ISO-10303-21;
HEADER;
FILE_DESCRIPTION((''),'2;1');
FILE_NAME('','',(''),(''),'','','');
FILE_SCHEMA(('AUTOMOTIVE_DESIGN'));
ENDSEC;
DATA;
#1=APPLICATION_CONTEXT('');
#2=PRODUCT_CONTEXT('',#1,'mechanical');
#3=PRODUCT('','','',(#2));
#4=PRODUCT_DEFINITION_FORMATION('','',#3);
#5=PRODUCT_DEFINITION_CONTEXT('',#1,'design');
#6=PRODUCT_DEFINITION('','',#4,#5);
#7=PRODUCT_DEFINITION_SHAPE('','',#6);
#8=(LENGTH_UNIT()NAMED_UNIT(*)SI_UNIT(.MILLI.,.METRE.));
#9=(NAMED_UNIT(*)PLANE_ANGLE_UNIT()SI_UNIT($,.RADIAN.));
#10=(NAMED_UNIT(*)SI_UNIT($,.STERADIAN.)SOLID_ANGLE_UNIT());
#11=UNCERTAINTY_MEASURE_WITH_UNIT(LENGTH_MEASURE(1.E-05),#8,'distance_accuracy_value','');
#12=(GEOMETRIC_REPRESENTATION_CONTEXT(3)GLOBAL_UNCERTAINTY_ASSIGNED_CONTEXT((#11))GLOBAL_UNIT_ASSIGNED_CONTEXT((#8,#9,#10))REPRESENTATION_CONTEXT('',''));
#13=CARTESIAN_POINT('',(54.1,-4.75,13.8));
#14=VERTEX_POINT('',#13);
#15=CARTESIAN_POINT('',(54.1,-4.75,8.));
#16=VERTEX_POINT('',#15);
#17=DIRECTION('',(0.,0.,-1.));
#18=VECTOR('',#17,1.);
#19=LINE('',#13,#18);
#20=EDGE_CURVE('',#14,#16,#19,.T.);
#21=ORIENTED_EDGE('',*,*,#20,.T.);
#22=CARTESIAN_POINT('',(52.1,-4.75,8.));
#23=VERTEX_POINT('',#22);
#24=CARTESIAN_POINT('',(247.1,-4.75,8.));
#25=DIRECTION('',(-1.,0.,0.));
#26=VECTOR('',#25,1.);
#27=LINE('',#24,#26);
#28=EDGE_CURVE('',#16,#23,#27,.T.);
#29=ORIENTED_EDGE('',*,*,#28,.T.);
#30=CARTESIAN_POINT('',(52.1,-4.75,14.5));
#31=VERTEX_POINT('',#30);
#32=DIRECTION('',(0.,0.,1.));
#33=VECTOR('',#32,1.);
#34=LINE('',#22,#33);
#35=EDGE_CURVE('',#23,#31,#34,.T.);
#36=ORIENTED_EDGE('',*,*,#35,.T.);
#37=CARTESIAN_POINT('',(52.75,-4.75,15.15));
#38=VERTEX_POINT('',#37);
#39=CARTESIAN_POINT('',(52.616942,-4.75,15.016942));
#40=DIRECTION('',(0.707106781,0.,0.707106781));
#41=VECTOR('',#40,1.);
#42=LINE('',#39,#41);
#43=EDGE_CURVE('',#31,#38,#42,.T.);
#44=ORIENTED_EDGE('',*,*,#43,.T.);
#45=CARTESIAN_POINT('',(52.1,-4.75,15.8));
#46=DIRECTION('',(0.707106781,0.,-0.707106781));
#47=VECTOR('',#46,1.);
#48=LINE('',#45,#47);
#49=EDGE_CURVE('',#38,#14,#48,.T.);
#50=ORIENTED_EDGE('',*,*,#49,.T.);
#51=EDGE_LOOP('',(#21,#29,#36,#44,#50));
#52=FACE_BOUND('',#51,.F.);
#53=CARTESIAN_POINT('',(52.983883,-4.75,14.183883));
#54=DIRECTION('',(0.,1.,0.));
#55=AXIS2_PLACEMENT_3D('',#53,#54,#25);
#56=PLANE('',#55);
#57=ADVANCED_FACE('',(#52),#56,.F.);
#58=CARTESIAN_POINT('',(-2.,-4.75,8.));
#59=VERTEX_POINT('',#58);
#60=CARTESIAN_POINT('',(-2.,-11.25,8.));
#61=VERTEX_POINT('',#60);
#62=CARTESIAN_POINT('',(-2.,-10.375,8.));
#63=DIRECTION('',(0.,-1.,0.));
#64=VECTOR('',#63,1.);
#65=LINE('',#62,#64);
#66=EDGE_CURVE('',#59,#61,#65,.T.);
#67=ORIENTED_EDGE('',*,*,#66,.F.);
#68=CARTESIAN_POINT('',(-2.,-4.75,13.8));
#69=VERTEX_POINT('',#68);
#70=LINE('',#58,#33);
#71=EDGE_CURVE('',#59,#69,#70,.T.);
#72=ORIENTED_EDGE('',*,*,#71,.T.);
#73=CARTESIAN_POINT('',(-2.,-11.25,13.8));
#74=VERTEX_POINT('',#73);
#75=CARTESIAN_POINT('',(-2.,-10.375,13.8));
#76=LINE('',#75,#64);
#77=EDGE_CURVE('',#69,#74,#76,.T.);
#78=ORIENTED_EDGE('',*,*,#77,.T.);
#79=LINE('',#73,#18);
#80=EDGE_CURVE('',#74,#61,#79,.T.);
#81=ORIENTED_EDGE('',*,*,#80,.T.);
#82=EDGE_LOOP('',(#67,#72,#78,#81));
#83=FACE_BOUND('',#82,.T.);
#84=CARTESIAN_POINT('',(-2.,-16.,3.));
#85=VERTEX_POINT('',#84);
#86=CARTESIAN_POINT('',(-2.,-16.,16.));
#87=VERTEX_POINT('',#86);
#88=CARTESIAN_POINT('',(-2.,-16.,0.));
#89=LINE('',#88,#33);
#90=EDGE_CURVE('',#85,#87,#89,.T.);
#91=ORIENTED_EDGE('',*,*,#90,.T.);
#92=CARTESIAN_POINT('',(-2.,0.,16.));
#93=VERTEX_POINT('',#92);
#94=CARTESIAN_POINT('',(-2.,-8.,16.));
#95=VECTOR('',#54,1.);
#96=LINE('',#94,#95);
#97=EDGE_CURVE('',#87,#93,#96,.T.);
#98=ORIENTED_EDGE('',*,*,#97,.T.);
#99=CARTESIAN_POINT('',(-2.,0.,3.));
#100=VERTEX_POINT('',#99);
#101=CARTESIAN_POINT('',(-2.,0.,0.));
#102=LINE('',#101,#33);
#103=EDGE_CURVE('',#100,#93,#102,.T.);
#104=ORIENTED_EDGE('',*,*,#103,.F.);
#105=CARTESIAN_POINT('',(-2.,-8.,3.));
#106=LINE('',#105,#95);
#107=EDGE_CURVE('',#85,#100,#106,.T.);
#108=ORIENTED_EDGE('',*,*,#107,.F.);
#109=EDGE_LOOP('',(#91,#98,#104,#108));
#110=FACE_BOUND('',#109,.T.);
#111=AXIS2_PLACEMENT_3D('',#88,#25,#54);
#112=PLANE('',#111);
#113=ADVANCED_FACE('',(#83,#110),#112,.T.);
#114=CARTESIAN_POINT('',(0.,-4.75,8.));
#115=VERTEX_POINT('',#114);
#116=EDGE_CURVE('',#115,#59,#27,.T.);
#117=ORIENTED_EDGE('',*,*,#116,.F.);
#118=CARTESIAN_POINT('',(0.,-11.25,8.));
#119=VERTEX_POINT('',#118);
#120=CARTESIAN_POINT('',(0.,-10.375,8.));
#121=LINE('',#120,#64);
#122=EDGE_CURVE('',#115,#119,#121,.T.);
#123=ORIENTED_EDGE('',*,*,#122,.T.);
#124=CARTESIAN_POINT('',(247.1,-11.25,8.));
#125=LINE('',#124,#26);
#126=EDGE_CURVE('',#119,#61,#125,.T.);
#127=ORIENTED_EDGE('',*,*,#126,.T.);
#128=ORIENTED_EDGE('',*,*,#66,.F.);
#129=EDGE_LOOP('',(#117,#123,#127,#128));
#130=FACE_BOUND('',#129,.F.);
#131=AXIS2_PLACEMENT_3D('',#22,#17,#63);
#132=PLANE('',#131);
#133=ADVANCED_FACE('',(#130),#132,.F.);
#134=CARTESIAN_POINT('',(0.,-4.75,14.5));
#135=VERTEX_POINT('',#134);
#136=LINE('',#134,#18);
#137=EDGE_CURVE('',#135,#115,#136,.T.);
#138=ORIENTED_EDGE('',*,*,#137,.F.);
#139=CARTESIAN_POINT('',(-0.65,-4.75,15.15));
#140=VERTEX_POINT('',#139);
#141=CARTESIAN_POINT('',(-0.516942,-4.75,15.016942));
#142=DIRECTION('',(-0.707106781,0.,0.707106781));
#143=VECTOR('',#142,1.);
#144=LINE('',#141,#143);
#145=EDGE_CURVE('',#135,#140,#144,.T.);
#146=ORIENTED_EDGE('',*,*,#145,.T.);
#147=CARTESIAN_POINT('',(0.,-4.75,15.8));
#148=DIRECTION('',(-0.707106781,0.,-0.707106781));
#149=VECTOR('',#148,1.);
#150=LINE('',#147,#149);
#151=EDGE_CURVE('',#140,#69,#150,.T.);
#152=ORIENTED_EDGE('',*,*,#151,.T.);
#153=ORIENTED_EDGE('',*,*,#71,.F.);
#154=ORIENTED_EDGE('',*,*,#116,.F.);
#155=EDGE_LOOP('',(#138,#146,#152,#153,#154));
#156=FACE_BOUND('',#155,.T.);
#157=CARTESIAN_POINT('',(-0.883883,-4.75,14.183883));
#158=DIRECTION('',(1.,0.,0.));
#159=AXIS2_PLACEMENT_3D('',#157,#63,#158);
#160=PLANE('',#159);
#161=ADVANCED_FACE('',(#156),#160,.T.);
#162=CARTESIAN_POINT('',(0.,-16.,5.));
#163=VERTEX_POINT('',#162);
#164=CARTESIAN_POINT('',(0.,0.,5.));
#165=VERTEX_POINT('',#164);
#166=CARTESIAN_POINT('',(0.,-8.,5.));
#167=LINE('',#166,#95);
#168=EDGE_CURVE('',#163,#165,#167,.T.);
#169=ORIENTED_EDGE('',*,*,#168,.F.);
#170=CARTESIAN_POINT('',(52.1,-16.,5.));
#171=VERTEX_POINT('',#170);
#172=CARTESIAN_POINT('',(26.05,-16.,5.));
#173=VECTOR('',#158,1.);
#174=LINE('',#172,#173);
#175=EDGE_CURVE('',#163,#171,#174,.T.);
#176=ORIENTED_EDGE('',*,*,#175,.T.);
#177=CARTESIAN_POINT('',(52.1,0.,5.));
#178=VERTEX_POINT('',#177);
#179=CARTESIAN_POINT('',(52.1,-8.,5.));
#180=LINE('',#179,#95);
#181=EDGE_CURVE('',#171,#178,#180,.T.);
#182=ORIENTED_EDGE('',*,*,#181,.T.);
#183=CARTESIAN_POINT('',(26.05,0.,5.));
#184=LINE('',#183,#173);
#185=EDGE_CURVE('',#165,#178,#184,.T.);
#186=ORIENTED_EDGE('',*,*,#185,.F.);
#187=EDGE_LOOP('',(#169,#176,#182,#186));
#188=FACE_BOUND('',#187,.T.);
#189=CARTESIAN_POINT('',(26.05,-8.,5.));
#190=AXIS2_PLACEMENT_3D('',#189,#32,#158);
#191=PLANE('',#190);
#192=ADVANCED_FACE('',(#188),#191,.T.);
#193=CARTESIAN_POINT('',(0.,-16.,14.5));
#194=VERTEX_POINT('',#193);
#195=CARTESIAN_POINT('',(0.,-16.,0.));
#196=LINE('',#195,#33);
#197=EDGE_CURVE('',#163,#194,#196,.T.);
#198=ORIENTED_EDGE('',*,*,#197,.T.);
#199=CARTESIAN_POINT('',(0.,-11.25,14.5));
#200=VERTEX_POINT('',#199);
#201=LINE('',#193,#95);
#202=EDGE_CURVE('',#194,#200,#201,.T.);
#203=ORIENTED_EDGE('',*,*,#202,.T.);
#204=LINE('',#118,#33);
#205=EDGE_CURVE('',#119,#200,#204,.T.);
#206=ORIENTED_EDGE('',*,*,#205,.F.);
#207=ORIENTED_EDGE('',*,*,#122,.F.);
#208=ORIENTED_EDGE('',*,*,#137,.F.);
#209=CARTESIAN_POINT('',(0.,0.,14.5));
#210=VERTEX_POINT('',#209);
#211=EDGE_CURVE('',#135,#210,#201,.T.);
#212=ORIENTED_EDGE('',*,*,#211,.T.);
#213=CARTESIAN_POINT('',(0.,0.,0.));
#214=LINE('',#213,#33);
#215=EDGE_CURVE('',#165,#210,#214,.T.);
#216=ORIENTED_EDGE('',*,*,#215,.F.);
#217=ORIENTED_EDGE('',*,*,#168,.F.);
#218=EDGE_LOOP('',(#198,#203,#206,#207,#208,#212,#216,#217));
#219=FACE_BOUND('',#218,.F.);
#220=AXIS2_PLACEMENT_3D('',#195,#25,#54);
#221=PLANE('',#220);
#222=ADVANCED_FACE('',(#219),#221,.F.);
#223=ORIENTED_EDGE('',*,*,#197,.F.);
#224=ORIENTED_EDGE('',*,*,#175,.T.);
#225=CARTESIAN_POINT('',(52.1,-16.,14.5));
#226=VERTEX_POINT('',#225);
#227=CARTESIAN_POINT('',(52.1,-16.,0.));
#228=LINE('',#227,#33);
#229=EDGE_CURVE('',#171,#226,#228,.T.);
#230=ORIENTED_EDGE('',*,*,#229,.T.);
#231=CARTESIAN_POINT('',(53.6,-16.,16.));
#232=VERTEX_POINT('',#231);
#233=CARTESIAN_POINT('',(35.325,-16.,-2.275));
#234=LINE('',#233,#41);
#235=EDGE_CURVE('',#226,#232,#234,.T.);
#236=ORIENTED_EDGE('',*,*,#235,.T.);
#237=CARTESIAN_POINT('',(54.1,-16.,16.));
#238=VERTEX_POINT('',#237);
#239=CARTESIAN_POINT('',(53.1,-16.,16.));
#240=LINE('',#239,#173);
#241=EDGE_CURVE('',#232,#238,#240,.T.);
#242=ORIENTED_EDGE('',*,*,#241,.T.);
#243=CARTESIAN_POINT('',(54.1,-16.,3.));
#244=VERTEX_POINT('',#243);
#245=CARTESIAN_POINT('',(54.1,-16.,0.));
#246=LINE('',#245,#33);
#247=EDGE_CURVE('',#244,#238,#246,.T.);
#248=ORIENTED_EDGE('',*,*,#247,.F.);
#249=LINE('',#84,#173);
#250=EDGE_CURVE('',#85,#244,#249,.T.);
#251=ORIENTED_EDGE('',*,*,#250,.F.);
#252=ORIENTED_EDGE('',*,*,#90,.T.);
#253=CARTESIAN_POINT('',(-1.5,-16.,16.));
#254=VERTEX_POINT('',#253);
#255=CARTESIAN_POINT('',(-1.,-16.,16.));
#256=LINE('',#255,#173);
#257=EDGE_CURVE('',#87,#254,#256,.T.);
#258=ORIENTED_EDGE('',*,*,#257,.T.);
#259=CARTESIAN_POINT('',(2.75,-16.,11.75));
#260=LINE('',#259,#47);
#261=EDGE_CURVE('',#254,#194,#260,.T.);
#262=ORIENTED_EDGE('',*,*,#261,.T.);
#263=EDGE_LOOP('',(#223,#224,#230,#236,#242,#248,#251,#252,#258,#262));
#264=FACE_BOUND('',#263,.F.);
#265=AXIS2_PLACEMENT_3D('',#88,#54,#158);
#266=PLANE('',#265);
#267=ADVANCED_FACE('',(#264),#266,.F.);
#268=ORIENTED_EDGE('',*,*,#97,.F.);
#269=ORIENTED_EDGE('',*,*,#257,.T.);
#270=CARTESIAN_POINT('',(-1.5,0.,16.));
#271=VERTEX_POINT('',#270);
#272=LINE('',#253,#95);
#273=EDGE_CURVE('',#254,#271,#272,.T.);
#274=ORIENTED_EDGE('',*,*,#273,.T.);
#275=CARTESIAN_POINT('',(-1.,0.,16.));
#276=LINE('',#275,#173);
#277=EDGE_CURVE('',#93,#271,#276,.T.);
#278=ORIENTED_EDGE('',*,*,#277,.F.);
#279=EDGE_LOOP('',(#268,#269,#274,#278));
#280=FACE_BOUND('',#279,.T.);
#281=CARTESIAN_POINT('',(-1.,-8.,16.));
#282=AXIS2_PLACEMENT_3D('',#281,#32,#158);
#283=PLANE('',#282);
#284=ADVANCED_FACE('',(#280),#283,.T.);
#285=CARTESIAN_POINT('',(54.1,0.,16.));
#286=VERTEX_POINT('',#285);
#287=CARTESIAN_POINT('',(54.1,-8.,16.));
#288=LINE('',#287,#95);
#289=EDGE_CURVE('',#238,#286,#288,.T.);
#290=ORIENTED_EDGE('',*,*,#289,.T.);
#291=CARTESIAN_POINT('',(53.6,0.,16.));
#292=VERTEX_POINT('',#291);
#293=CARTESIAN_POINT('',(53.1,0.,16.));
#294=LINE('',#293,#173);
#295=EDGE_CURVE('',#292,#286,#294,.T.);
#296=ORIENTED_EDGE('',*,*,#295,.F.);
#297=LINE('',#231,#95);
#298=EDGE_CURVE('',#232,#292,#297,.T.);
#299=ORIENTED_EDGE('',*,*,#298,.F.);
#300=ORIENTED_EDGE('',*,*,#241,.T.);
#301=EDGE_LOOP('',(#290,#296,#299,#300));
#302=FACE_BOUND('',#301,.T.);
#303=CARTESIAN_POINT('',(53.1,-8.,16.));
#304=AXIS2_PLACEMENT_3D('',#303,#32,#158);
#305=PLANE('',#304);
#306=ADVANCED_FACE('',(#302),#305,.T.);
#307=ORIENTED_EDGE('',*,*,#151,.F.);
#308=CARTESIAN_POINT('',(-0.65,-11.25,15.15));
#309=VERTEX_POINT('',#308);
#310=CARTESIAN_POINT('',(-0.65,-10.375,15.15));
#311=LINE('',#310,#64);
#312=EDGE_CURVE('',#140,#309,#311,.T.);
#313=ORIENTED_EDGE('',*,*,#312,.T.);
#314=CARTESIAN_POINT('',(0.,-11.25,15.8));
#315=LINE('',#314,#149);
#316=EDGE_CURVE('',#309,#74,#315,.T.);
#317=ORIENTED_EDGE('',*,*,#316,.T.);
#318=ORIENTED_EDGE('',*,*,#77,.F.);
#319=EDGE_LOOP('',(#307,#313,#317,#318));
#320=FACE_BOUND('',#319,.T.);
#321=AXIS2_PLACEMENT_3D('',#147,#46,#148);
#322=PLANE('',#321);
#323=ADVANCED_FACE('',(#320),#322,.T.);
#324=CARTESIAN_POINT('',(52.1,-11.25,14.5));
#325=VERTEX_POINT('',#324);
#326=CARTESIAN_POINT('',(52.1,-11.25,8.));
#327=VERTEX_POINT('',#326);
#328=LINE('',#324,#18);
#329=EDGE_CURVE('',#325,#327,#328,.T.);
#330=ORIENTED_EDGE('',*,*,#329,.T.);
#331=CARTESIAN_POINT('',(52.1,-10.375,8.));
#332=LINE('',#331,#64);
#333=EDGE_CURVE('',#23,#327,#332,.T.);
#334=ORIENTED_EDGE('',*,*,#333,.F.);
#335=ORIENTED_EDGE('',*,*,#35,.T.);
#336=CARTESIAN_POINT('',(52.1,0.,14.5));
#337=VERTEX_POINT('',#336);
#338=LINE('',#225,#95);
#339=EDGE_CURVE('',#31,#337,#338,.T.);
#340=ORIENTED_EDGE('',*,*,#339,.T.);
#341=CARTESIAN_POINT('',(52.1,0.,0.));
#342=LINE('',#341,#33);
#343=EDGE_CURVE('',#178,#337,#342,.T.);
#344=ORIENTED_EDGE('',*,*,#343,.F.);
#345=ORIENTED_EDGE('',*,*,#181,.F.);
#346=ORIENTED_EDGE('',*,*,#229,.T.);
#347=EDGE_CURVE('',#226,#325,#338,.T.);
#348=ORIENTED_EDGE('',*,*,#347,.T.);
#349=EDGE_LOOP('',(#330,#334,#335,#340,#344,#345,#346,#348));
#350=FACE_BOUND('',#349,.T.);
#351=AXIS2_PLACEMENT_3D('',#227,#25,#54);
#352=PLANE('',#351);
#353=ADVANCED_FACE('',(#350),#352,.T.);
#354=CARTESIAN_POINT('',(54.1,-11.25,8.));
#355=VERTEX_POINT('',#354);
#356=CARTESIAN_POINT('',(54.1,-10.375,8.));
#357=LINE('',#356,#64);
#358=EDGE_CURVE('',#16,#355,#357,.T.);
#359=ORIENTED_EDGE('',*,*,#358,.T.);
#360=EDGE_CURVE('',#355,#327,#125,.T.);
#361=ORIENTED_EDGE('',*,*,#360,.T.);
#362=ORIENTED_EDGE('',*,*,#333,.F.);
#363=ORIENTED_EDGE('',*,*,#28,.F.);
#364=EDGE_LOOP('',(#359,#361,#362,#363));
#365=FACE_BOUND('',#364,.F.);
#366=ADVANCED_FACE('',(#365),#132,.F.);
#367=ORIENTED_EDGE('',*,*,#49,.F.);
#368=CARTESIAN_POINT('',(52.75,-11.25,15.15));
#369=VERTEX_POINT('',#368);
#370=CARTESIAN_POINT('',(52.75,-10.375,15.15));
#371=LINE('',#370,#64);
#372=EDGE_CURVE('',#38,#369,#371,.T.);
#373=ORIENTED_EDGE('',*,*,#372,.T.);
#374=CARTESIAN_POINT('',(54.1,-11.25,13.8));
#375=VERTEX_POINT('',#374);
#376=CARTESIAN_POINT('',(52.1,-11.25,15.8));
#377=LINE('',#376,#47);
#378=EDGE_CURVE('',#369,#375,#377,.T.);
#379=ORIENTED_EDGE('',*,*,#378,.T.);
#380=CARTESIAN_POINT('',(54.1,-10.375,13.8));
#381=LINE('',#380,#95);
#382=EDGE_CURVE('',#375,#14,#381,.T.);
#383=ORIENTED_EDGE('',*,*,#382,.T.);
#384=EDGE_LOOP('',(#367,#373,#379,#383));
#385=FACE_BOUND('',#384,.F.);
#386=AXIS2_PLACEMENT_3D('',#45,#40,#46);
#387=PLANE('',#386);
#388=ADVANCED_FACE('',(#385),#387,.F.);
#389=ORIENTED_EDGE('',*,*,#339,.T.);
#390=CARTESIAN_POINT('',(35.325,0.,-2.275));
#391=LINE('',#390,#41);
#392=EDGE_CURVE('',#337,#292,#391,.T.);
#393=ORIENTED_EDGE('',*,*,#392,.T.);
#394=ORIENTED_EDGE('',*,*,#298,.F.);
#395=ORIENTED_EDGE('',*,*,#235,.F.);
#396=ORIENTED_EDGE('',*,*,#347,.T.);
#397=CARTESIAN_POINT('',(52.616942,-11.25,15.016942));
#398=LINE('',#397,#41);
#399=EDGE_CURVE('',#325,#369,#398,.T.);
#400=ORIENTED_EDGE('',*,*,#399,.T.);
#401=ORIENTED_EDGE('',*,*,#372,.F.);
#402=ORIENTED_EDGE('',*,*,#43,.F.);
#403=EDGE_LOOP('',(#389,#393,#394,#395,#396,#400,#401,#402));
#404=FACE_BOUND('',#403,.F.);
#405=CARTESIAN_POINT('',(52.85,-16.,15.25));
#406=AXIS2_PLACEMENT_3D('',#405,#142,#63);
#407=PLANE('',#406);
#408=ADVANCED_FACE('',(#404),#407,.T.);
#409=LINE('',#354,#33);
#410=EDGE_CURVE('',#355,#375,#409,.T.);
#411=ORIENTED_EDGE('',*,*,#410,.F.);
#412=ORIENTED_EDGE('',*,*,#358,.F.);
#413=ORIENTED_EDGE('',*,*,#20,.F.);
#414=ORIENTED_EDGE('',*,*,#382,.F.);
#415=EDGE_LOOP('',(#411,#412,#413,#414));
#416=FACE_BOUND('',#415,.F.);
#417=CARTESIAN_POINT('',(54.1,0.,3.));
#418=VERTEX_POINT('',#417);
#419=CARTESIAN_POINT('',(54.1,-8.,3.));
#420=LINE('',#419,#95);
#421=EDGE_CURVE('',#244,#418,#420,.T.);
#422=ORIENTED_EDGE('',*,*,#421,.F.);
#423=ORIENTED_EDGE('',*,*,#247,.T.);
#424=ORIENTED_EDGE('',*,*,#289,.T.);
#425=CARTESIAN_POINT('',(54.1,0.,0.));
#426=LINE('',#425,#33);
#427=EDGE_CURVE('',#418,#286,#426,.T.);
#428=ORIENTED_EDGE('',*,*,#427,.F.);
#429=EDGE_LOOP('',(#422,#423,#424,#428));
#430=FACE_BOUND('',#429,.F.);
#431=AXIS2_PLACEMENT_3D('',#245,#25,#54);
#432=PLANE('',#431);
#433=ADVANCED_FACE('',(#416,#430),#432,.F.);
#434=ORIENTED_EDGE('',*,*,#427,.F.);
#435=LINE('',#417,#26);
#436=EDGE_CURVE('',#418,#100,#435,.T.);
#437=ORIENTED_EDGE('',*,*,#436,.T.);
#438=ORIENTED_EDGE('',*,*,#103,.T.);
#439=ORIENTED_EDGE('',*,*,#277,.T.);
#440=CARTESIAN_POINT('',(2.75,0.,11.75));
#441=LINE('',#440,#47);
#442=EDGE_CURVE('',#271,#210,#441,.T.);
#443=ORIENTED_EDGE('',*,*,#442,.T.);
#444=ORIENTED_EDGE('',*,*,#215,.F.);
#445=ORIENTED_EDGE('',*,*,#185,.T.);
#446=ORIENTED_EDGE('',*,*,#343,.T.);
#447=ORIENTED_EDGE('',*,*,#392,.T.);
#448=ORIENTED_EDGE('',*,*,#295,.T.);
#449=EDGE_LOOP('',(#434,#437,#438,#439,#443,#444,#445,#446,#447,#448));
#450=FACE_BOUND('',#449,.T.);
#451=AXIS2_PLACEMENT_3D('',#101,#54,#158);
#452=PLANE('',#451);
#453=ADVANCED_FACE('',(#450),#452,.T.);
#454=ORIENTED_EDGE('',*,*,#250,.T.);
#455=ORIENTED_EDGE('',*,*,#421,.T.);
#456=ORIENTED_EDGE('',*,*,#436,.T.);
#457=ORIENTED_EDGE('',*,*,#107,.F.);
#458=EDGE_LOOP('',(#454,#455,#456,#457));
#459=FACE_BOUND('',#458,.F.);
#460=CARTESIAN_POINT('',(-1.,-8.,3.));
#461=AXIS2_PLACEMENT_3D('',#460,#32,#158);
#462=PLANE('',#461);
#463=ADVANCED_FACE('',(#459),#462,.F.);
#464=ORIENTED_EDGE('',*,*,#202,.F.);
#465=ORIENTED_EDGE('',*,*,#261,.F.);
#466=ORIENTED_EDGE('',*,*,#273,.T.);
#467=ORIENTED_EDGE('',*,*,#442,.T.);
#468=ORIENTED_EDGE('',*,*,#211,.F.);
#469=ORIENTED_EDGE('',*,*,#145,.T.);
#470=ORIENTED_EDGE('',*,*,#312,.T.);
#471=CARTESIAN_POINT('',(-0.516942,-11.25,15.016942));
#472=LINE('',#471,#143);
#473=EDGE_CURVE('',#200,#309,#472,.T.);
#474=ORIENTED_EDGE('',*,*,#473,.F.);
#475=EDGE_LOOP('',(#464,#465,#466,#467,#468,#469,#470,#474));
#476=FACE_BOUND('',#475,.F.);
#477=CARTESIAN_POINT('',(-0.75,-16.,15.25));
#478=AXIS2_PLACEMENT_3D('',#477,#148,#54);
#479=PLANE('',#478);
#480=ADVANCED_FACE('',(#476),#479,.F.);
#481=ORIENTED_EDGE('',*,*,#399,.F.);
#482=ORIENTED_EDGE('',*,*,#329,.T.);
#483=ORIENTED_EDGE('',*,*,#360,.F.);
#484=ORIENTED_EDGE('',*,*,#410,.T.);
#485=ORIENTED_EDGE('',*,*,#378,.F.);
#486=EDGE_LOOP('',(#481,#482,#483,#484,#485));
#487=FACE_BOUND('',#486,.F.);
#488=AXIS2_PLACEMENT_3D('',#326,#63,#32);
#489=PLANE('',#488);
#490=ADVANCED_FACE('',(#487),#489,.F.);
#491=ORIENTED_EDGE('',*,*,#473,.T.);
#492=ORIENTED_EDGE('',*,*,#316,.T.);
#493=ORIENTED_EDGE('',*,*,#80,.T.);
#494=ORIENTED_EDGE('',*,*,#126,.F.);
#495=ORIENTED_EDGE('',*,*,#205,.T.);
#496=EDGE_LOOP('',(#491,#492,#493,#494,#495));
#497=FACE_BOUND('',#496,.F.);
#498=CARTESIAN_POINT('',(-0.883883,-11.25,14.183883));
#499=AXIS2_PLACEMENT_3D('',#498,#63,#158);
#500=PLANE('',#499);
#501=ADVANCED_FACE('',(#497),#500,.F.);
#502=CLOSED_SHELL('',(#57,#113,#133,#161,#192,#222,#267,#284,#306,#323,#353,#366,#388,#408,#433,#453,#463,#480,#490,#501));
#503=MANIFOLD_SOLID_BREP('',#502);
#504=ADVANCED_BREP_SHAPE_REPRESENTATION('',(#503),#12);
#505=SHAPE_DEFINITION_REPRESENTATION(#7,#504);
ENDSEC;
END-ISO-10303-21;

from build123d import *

# Parameters (mm, degrees)
F0_W        = 52.1
F0_H        = 16
F1_DEPTH    = 5
F2_W        = 2
F2_H        = 16
F3_DEPTH    = 16
F4_W        = 6.5
F4_H        = 5.3
F5_DEPTH    = 195
F6_SIZE     = 1.5
F7_T1_DEPTH = 6.5
F8_DEPTH    = 3


# Not quite as in the source:
# - a fillet or chamfer that OpenCascade refuses, or shapes differently, is made with other operations: its cross-section is extruded or revolved along the edge and cut away or added


with BuildPart() as f1:
    # F0 (on Top) → F1 (new body)
    with BuildSketch(Plane.XY):
        with Locations((26.05, -8)):
            Rectangle(F0_W, F0_H)
    extrude(amount=F1_DEPTH)

    # F2 (on Top) → F3 (join)
    with BuildSketch(Plane.XY):
        with Locations((-1, -8)):
            Rectangle(F2_W, F2_H)
        with Locations((53.1, -8)):
            Rectangle(F2_W, F2_H)
    extrude(amount=F3_DEPTH)

    # F4 (on face) → F5 (cut, symmetric)
    with BuildSketch(Plane(origin=(52.1, 0, 0), x_dir=(0, -1, 0), z_dir=(-1, 0, 0))):
        with Locations((8, 10.65)):
            Rectangle(F4_W, F4_H)
    extrude(amount=F5_DEPTH, both=True, mode=Mode.SUBTRACT)

    # F6
    f6_edges = [f1.edges().sort_by_distance(p)[0] for p in [
        (52.1, -8, 16),
        (0, -8, 16),
    ]]
    chamfer(f6_edges, length=F6_SIZE)

    # F7: chamfer of 2.5 on 2 edges, made by hand

    # F7_s2 → F7_t1 (cut)
    with BuildSketch(Plane.XZ.offset(4.75)):
        Polygon((52.1, 15.8), (54.6, 13.3), (52.1, 13.3), align=None)
        Polygon((0, 15.8), (-2.5, 13.3), (0, 13.3), align=None)
    extrude(amount=F7_T1_DEPTH, mode=Mode.SUBTRACT)

    # F8 (cut): a face of the model
    f8_faces = [f1.faces().sort_by_distance(p)[0] for p in [
        (26.05, -8, 0),
    ]]
    extrude(f8_faces, amount=-F8_DEPTH, mode=Mode.SUBTRACT)


solid = f1.part
